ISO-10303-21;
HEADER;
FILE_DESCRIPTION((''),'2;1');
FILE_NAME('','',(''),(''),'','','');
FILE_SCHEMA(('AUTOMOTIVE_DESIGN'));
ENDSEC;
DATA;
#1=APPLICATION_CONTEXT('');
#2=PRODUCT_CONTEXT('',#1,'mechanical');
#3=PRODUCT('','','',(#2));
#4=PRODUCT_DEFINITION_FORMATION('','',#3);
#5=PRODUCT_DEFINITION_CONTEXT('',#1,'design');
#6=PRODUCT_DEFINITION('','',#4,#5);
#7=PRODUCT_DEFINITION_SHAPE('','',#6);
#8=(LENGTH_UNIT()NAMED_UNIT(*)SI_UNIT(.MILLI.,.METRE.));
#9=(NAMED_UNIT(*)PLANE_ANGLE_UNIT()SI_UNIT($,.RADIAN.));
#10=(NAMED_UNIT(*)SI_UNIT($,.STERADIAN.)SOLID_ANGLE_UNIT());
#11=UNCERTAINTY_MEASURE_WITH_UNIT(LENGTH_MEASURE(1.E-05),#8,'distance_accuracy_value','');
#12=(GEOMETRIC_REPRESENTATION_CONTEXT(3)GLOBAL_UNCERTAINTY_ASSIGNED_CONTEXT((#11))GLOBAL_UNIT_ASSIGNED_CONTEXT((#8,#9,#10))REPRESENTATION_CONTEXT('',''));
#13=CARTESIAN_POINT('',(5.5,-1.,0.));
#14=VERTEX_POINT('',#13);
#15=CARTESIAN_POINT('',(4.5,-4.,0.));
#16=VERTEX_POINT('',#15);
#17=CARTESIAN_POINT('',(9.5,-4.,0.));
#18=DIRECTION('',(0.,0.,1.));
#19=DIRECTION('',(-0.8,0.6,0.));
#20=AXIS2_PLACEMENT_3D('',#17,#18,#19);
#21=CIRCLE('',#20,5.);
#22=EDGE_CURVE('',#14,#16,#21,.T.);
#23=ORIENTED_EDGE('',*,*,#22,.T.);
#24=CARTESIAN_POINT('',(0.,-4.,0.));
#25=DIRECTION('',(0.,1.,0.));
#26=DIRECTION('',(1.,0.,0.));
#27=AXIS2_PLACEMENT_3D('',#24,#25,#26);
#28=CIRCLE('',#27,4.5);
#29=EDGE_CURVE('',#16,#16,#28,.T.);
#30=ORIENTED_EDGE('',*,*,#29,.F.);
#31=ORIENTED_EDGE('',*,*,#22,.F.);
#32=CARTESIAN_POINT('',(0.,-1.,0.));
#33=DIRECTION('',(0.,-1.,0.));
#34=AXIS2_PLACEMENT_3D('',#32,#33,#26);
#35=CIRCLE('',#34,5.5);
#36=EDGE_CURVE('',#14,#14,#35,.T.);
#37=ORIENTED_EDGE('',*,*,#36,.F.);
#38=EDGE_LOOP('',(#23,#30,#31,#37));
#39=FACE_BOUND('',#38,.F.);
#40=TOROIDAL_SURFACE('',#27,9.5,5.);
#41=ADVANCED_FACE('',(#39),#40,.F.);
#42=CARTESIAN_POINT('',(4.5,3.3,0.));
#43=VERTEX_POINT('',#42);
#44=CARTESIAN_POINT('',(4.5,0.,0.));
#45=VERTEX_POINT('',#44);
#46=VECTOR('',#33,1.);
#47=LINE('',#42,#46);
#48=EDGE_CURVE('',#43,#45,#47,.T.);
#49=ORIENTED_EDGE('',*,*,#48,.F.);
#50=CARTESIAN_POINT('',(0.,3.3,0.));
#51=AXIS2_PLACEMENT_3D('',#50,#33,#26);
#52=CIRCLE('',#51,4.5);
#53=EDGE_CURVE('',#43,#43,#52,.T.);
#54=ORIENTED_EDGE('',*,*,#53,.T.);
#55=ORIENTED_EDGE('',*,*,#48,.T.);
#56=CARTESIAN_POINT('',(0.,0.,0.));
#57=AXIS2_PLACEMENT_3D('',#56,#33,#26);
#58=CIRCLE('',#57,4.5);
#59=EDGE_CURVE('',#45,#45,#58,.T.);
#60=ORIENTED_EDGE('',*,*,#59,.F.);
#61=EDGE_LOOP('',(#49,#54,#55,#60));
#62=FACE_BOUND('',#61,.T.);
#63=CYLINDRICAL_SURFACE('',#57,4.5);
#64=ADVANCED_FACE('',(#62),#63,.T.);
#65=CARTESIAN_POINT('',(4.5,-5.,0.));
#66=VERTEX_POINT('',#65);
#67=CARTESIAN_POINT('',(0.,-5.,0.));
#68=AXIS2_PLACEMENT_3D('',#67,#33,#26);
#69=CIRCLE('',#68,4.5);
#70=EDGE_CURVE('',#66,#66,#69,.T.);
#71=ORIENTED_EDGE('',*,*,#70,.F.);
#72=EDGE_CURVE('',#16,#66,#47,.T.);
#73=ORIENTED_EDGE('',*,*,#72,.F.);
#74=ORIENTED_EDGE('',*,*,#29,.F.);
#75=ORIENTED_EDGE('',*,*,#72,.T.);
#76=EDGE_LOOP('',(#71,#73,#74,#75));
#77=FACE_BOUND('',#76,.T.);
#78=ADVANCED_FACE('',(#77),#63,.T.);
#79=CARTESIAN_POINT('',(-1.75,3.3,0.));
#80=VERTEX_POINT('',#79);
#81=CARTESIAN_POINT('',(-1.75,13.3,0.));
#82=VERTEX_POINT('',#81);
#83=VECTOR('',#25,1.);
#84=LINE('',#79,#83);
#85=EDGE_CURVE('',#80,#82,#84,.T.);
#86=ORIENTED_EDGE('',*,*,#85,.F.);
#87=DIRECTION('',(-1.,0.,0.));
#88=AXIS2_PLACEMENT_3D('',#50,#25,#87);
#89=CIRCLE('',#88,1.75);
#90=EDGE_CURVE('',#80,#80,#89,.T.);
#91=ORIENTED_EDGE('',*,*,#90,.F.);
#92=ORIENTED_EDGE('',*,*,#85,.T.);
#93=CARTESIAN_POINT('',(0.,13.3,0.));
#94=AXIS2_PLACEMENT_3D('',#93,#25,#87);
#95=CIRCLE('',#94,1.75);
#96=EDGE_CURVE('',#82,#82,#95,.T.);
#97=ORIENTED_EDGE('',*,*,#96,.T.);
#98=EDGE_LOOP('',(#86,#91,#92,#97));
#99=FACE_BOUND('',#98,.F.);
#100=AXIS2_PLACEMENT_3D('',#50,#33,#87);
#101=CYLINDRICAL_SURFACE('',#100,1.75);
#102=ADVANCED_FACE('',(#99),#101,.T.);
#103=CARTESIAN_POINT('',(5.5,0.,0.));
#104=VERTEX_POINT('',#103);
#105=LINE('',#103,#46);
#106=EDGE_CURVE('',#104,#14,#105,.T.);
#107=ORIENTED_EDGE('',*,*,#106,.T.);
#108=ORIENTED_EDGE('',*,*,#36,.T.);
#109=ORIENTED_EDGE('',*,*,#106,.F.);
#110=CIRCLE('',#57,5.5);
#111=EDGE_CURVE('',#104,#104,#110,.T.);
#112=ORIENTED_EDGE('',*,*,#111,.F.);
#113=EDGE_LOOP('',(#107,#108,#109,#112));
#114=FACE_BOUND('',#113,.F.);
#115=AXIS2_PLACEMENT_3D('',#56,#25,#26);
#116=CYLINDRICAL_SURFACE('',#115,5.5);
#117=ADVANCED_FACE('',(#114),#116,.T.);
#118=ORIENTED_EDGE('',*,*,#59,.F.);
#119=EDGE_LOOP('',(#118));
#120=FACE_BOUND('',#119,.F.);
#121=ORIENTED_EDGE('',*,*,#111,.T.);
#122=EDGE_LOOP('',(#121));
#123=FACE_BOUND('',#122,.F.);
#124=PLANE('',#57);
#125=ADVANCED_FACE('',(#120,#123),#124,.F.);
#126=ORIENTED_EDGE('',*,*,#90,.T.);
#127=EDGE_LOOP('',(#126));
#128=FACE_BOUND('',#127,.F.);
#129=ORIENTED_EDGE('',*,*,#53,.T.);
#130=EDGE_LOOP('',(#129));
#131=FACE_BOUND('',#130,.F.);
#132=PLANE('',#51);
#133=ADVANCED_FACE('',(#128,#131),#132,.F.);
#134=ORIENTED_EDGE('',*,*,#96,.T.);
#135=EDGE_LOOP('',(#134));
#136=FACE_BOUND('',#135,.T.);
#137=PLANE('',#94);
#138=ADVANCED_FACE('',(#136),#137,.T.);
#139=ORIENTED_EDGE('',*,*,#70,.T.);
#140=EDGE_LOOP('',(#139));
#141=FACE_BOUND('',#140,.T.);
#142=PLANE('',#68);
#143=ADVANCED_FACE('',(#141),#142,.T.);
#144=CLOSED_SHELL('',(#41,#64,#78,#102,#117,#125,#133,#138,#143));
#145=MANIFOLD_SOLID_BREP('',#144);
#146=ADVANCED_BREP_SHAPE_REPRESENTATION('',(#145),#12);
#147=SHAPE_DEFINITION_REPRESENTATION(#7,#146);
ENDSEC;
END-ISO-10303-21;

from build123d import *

# Parameters (mm, degrees)
F0_R     = 4.5
F1_DEPTH = 5
F2_DEPTH = 3.3
F3_R     = 5.5
F4_DEPTH = 1
F6_R     = 1.75
F7_DEPTH = 10


# Not quite as in the source:
# - a fillet or chamfer that OpenCascade refuses, or shapes differently, is made with other operations: its cross-section is extruded or revolved along the edge and cut away or added


with BuildPart() as f1:
    # F0 (on Front) → F1 (new body)
    with BuildSketch(Plane.XZ):
        Circle(F0_R)
    extrude(amount=F1_DEPTH)

    # F2 (add): a face of the model
    f2_faces = [f1.faces().sort_by_distance(p)[0] for p in [
        (0, 0, 0),
    ]]
    extrude(f2_faces, amount=F2_DEPTH)

    # F3 (on Front) → F4 (join)
    with BuildSketch(Plane.XZ):
        Circle(F3_R)
    extrude(amount=F4_DEPTH)

    # F5: fillet of radius 5 on 1 edges, made by hand

    # F5_s1 → F5_t2 (revolve)
    with BuildSketch(Plane.XY):
        with BuildLine():
            ThreePointArc((5.5, -1), (4.7565835097, -2.4188611699), (4.5, -4))
            Line((4.5, -4), (4.5, -1))
            Line((4.5, -1), (5.5, -1))
        make_face()
    revolve(axis=Axis((0, -1, 0), (0, 1, 0)))

    # F6 (on face) → F7 (join)
    with BuildSketch(Plane(origin=(0, 3.3, 0), x_dir=(-1, 0, 0), z_dir=(0, 1, 0))):
        Circle(F6_R)
    extrude(amount=F7_DEPTH)


solid = f1.part
